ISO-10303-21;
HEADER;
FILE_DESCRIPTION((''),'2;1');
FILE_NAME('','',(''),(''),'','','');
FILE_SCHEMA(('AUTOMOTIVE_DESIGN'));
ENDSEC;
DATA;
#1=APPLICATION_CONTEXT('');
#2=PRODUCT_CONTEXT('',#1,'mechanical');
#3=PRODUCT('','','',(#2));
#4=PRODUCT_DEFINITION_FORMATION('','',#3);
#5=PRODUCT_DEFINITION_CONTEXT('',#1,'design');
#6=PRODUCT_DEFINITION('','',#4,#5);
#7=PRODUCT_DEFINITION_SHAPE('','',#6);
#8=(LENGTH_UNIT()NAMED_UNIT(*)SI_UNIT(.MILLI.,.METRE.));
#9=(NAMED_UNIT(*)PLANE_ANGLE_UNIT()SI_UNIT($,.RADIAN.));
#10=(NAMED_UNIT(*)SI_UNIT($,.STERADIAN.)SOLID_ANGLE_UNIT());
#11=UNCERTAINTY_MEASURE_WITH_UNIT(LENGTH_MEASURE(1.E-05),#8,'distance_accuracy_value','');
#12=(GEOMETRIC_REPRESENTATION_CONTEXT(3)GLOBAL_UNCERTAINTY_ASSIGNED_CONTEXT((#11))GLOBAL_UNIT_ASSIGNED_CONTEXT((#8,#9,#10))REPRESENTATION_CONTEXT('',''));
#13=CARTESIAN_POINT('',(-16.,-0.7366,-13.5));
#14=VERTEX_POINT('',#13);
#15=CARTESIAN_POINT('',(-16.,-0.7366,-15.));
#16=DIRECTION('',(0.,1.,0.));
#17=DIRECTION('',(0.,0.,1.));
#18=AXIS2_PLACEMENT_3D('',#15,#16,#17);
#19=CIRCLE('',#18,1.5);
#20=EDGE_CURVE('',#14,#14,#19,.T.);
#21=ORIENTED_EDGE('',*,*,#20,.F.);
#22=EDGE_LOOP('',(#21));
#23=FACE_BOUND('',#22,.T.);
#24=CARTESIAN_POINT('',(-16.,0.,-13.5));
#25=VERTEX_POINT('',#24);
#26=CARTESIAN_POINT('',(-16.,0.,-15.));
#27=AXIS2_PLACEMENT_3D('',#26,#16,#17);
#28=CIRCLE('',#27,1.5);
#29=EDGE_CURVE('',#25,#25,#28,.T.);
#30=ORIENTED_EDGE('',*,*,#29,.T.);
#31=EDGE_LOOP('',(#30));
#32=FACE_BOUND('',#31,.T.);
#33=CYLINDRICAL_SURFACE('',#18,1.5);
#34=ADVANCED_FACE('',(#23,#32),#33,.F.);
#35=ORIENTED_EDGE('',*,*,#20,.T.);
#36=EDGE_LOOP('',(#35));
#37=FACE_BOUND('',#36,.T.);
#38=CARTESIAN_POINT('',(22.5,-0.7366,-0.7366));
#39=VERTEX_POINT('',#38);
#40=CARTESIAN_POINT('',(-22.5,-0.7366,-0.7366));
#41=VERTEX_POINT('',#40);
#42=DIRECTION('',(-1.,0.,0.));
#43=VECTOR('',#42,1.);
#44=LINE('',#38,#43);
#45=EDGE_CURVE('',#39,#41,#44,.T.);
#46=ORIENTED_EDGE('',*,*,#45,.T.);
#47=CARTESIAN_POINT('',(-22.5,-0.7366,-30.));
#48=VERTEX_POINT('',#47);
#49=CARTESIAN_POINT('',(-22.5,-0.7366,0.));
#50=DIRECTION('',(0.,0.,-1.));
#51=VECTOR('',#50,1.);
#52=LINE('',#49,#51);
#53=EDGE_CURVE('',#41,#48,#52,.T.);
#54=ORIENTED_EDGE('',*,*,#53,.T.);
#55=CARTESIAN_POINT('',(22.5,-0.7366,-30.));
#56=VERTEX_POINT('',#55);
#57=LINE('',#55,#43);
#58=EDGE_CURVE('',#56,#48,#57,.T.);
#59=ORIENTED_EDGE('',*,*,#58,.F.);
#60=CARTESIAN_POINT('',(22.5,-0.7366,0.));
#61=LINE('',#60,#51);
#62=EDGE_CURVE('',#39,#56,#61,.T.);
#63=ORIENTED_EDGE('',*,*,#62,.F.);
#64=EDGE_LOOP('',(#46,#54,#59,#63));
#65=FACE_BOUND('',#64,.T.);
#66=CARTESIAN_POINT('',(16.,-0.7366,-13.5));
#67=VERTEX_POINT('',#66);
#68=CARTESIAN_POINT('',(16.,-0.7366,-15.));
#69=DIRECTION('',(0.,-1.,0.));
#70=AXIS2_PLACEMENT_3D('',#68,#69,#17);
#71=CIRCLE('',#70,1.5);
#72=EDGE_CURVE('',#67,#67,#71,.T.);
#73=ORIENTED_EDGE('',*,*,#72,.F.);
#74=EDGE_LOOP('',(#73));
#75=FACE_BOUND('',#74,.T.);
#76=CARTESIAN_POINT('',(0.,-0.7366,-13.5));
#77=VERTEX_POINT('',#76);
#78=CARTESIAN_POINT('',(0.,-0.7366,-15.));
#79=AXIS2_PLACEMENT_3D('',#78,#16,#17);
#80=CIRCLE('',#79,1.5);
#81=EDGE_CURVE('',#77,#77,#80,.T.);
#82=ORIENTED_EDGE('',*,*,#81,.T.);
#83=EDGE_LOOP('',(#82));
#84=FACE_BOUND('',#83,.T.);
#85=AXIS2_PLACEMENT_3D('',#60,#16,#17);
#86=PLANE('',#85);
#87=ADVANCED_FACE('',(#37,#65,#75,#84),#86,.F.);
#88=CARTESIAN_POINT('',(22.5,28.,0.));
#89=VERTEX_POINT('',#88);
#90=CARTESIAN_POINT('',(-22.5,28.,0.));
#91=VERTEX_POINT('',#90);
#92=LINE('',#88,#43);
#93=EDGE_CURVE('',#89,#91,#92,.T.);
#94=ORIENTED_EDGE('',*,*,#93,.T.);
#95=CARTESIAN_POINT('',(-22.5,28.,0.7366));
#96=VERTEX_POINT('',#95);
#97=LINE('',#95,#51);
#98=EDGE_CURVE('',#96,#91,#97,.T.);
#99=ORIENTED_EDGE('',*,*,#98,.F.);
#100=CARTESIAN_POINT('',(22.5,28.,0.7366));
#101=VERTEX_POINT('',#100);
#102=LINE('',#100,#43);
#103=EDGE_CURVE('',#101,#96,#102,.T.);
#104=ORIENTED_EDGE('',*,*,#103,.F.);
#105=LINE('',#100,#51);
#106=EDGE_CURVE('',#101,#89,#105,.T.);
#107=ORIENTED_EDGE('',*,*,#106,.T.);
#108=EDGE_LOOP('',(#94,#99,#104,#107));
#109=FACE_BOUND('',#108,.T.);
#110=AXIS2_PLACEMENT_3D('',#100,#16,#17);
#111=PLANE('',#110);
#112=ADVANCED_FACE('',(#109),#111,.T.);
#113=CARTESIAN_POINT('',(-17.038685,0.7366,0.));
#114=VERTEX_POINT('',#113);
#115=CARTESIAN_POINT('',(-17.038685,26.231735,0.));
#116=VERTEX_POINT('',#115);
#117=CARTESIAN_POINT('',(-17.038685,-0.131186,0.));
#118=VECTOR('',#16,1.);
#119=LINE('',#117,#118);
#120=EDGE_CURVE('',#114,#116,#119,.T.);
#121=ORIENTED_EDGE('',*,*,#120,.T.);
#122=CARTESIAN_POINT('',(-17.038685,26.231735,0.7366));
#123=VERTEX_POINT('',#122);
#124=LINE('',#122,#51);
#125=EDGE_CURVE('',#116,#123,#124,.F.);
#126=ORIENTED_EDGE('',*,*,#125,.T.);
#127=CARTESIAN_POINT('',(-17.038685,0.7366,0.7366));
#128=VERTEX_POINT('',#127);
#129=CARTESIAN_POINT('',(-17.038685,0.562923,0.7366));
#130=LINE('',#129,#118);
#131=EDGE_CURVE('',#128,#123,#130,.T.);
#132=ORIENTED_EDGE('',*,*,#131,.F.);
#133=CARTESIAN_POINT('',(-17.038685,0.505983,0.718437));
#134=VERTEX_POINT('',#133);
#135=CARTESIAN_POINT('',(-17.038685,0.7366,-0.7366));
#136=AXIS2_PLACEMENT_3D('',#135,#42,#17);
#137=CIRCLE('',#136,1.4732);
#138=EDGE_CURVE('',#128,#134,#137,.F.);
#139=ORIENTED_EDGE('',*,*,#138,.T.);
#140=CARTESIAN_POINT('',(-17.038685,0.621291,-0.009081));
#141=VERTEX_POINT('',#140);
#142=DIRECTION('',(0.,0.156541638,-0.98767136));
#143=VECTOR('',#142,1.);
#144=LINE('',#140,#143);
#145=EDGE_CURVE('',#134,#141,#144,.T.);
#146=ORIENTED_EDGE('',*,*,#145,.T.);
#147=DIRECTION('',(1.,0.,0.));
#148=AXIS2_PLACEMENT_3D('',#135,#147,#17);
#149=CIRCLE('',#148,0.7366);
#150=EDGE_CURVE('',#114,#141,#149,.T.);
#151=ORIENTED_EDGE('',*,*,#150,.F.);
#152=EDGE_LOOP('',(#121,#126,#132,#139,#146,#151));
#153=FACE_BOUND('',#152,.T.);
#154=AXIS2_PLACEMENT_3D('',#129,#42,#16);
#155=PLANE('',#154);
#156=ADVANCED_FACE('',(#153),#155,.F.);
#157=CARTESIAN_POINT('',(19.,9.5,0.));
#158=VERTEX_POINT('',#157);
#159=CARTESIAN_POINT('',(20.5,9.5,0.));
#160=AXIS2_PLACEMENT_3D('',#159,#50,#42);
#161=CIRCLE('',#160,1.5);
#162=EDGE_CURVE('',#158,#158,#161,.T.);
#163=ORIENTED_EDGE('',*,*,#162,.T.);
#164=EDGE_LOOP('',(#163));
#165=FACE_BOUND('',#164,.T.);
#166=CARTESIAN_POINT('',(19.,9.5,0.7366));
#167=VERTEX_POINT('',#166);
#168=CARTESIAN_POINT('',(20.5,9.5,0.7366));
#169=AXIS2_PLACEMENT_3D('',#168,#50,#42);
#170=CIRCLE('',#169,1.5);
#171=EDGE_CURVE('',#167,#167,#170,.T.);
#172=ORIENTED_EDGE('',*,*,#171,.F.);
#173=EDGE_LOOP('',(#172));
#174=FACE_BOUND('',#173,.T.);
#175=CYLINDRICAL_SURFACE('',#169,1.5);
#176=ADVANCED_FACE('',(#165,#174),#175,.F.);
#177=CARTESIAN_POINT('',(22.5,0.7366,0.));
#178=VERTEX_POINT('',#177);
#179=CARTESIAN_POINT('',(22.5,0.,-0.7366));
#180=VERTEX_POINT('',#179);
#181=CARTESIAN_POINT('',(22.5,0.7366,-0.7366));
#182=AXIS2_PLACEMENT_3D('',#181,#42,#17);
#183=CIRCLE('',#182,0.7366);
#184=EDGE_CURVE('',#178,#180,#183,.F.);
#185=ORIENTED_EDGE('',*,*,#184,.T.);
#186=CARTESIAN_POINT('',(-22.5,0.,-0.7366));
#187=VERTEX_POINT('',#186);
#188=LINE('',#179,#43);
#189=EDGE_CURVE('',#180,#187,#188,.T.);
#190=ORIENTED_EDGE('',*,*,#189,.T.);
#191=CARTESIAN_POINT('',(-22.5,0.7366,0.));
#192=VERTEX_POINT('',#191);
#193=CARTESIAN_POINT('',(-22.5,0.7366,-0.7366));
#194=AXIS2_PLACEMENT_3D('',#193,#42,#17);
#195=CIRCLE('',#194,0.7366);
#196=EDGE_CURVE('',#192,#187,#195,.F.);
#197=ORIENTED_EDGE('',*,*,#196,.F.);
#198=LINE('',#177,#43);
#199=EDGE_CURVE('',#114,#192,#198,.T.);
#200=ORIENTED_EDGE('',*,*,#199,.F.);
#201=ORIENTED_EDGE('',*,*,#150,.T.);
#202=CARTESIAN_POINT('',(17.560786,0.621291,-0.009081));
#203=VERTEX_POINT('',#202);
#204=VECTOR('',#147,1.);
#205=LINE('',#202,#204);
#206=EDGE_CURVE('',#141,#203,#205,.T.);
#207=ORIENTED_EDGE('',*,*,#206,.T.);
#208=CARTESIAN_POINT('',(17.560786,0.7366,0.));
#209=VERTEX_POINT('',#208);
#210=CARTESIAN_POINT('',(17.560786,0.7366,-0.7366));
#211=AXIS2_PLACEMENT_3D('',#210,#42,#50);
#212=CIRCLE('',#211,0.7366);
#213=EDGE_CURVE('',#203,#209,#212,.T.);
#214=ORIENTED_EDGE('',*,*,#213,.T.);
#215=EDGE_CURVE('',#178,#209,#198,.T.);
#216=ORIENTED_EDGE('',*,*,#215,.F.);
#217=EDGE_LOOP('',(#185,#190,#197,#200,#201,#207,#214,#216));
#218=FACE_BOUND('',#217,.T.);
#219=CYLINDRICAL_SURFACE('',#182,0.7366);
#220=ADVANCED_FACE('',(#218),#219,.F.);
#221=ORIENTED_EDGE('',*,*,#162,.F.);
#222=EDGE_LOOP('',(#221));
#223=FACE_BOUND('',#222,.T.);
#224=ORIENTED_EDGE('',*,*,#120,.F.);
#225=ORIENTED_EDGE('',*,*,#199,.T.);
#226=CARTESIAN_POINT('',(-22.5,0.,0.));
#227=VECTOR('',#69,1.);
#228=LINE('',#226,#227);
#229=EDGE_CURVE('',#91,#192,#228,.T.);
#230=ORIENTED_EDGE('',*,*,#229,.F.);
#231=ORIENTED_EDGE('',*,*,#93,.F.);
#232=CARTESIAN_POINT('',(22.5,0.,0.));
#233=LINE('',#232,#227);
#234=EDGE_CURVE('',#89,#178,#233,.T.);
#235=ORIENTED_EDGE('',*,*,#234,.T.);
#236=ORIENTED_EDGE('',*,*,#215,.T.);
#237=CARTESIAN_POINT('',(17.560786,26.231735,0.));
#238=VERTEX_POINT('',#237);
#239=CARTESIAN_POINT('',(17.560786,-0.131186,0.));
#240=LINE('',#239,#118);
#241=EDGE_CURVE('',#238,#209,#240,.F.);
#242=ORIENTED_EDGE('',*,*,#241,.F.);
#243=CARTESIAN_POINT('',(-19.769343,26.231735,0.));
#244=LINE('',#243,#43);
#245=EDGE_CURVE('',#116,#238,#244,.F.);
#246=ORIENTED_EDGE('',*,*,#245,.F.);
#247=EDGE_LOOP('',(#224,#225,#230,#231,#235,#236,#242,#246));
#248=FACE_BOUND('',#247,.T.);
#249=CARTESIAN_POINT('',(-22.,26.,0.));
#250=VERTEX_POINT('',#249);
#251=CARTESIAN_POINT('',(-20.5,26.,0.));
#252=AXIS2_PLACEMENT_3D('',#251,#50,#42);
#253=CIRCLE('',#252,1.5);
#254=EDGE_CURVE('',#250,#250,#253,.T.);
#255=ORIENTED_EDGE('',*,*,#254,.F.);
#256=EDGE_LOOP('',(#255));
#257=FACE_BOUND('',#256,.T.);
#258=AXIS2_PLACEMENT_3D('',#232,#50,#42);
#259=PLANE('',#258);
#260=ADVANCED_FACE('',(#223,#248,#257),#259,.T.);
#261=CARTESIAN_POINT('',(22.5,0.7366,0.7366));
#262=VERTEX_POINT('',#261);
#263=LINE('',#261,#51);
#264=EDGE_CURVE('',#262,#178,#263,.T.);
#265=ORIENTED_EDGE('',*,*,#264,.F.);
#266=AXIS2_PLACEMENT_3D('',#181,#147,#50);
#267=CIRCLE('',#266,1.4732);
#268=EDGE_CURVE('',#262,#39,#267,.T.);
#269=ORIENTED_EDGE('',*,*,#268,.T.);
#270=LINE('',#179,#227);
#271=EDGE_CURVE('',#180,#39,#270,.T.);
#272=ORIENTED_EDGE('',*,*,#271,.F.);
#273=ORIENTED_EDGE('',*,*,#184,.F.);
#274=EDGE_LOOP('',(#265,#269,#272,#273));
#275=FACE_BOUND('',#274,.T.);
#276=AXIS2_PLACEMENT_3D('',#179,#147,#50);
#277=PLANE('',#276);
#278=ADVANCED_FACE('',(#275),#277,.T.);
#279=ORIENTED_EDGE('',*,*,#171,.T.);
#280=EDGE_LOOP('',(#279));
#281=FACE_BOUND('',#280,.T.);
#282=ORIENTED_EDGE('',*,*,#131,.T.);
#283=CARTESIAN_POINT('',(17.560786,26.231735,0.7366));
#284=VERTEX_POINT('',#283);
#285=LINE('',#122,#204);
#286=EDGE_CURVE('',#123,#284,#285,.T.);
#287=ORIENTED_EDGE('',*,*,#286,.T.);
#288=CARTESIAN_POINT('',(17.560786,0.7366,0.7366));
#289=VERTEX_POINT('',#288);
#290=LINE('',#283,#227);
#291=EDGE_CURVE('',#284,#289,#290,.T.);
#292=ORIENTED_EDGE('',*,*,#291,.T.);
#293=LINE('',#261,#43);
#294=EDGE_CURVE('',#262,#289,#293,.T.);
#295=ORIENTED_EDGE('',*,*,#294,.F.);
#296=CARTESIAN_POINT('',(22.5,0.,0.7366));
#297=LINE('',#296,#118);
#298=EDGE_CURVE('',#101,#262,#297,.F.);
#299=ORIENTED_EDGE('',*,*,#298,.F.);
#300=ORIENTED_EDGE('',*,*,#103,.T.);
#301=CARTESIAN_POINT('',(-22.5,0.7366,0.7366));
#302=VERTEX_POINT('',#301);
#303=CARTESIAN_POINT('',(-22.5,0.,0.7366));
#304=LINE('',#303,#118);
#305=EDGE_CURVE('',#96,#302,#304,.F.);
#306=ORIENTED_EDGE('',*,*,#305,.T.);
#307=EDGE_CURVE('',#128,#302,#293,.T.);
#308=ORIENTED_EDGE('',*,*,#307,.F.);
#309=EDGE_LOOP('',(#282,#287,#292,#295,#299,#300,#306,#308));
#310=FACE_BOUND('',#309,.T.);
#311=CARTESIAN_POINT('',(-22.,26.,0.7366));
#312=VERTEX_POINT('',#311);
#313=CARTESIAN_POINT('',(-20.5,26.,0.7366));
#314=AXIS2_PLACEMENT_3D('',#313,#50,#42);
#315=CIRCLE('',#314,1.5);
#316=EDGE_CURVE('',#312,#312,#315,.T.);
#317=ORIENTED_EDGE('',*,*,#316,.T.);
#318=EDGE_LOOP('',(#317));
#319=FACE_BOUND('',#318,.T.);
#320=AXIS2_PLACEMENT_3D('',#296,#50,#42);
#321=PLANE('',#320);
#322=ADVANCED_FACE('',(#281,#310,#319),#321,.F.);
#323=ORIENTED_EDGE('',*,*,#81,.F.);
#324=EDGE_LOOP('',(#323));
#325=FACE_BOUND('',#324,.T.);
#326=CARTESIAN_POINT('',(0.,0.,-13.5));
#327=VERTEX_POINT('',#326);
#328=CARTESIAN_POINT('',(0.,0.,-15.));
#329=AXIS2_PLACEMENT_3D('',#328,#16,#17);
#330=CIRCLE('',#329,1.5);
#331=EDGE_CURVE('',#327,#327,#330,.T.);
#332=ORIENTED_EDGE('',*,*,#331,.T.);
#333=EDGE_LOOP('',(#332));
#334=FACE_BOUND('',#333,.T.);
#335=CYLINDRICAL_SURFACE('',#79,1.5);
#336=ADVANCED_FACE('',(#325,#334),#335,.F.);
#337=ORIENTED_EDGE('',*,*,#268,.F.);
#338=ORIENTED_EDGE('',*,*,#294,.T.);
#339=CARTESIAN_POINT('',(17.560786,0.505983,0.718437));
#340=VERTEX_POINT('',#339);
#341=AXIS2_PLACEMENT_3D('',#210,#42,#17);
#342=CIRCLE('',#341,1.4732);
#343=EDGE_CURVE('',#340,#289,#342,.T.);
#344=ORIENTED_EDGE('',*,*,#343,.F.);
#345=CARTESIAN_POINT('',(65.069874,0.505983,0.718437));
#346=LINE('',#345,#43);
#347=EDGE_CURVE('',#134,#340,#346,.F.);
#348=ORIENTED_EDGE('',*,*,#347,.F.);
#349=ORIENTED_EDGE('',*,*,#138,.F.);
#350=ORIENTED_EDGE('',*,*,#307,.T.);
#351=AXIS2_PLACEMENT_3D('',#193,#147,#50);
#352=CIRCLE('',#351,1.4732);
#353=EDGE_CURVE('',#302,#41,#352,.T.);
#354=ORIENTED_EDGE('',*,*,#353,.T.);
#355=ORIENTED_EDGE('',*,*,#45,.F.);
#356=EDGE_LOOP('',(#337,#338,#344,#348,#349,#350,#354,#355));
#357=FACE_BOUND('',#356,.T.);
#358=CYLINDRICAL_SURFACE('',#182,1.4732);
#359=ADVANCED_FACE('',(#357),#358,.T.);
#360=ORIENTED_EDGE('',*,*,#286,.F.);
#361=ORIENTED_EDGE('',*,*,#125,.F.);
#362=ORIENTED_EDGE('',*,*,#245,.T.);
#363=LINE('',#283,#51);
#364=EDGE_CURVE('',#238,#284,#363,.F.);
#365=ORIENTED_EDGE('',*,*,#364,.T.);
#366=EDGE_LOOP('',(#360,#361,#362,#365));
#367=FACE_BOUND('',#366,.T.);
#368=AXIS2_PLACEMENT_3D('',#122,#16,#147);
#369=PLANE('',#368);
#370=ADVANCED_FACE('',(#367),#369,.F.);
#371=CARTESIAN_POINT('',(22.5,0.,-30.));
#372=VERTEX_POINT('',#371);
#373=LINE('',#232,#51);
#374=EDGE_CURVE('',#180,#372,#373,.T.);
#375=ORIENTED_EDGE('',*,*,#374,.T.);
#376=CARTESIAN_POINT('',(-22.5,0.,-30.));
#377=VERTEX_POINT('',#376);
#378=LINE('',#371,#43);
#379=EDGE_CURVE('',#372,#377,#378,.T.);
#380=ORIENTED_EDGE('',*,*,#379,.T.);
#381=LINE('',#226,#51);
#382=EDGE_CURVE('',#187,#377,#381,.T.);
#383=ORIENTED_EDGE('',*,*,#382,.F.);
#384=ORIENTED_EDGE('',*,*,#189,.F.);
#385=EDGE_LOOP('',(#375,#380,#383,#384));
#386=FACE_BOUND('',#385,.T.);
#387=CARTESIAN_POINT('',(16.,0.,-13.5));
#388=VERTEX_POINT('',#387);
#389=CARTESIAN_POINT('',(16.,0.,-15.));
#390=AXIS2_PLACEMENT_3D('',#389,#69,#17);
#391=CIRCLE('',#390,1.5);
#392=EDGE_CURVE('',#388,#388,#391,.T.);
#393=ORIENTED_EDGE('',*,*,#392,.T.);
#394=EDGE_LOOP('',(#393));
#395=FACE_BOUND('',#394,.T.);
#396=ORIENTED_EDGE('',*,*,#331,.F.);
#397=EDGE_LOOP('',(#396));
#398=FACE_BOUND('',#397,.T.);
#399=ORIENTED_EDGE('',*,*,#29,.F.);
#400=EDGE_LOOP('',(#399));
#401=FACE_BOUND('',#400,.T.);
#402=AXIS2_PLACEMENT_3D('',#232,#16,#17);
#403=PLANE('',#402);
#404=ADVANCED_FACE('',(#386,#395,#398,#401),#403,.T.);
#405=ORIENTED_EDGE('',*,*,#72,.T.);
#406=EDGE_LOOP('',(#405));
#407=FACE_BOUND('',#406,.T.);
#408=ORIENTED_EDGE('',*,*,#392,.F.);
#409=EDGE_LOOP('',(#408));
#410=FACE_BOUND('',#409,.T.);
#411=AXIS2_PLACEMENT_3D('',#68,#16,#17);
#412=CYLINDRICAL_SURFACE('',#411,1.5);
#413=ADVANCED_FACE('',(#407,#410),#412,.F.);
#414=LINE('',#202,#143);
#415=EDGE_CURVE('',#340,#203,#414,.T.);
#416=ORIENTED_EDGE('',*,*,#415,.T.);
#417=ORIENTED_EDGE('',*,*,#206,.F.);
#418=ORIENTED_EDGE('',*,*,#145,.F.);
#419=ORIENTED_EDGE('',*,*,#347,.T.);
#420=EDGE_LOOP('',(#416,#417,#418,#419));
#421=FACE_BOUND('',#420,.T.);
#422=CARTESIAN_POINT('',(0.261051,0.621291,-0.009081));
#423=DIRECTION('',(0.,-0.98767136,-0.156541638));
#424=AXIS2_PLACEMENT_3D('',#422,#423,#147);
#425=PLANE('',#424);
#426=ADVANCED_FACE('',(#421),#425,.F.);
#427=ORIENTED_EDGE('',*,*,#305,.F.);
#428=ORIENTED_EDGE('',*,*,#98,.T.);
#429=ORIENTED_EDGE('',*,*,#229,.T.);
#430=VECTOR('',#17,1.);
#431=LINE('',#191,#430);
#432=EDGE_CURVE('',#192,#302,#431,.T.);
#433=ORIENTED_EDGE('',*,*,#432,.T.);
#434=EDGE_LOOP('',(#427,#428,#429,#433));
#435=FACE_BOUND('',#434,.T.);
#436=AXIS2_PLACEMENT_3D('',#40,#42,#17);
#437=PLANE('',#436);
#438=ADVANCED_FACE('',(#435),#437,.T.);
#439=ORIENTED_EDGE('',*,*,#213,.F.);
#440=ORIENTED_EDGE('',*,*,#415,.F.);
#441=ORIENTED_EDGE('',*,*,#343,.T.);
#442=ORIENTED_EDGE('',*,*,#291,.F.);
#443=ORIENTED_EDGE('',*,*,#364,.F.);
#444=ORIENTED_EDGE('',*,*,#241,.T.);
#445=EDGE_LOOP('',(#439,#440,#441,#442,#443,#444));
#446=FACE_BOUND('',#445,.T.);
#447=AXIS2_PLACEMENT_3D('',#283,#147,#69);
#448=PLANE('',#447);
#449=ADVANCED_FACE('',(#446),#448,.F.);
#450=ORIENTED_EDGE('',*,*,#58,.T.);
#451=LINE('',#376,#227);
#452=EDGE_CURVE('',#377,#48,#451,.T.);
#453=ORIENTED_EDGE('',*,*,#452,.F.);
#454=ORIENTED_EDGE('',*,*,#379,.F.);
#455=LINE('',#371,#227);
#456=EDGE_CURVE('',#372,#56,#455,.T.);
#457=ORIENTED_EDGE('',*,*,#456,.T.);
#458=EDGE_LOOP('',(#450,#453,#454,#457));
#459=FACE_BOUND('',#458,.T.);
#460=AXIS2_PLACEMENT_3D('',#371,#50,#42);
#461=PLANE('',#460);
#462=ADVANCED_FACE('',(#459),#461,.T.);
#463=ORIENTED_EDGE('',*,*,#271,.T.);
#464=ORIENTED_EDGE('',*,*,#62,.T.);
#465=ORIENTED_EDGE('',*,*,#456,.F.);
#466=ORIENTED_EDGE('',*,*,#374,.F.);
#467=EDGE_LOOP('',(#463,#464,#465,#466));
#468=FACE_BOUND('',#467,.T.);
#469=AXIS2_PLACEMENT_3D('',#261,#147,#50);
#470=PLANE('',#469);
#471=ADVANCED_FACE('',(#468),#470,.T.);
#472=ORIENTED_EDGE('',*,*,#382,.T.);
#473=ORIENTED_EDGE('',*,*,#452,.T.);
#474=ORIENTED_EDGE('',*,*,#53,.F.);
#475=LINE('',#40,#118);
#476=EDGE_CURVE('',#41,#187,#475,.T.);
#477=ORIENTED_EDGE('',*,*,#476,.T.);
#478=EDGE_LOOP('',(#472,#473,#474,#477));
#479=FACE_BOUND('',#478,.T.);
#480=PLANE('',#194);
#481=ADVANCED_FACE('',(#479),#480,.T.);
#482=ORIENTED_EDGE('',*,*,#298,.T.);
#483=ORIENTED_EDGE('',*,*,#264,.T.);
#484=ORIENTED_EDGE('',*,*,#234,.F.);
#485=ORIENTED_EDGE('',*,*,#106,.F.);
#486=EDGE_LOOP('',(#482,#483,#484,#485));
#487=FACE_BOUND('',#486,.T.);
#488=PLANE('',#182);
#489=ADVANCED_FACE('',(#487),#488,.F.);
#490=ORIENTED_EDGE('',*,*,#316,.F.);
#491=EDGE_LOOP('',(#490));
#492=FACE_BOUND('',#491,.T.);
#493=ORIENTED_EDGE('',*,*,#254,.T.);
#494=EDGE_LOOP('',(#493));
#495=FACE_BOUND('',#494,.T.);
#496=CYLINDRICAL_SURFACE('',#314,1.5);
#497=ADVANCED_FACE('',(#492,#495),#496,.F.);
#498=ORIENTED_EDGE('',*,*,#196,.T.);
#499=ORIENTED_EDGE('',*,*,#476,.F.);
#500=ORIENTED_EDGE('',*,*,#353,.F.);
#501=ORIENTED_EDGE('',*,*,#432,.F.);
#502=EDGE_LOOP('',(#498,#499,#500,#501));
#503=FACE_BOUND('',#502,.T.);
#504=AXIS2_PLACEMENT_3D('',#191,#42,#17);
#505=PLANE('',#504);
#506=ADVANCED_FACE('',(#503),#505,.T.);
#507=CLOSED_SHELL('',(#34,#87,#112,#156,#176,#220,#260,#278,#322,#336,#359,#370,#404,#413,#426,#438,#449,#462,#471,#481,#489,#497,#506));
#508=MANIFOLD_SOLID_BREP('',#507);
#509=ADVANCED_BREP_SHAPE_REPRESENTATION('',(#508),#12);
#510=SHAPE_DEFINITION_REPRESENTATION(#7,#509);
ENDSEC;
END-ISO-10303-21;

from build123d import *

# Parameters (mm, degrees)
BASE_FLANGE1_DEPTH = 22.5
SKETCH6_R          = 1.5
CUT_EXTRUDE2_DEPTH = 47.800106837
SKETCH8_R          = 1.5
CUT_EXTRUDE3_DEPTH = 47.800106837
CUT_EXTRUDE5_START = -17.038685437
CUT_EXTRUDE5_DEPTH = 34.599471918


# Read off the part's stored shape, not the designer's step: Cut-Extrude5
# Sheet-metal steps are written as plain solids
with BuildPart() as part:
    # Sketch2 → Base-Flange1 (new, symmetric)
    with BuildSketch(Plane(origin=(0, 0, 0), x_dir=(0, 0, -1), z_dir=(1, 0, 0))):
        with BuildLine():
            Line((30, 0), (0.7366, 0))
            ThreePointArc((0.7366, 0), (0.215745145, 0.215745145), (0, 0.7366))
            Line((0, 0.7366), (0, 28))
            Line((0, 28), (-0.7366, 28))
            Line((-0.7366, 28), (-0.7366, 0.7366))
            ThreePointArc((-0.7366, 0.7366), (-0.30510971, -0.30510971), (0.7366, -0.7366))
            Line((0.7366, -0.7366), (30, -0.7366))
            Line((30, -0.7366), (30, 0))
        make_face()
    extrude(amount=BASE_FLANGE1_DEPTH, both=True)

    # Sketch6 → Cut-Extrude2 (cut, through all)
    with BuildSketch(Plane(origin=(0, 0, 0), x_dir=(-1, 0, 0), z_dir=(0, 0, -1))):
        with Locations((-20.5, 9.5)):
            Circle(SKETCH6_R)
        with Locations((20.5, 26)):
            Circle(SKETCH6_R)
    extrude(amount=-CUT_EXTRUDE2_DEPTH, mode=Mode.SUBTRACT)

    # Sketch8 → Cut-Extrude3 (cut, through all)
    with BuildSketch(Plane(origin=(0, 0, 0), x_dir=(1, 0, 0), z_dir=(0, 1, 0))):
        with Locations(Location((0, 15, 0), (0, 0, 270))):
            Circle(SKETCH8_R)
        with Locations(Location((-16, 15, 0), (0, 0, 270))):
            Circle(SKETCH8_R)
    cut_extrude3 = extrude(amount=-CUT_EXTRUDE3_DEPTH, mode=Mode.SUBTRACT)

    # Mirror1: Cut-Extrude3 across plane
    add(cut_extrude3.mirror(Plane(origin=(0, 0, 0), x_dir=(0, 0, 1), z_dir=(1, 0, 0))), mode=Mode.SUBTRACT)

    # Cut-Extrude5 outline → Cut-Extrude5 (cut)
    with BuildSketch(Plane.YZ.offset(CUT_EXTRUDE5_START)):
        with BuildLine():
            ThreePointArc((0.7366, 0.7366), (0.620934378, 0.732052343), (0.505982859, 0.718437448))
            Line((0.505982859, 0.718437448), (0.62129143, -0.009081276))
            ThreePointArc((0.62129143, -0.009081276), (0.678767189, -0.002273829), (0.7366, 0))
            Line((0.7366, 0), (26.231735093, 0))
            Line((26.231735093, 0), (26.231735093, 0.7366))
            Line((26.231735093, 0.7366), (0.7366, 0.7366))
        make_face()
    extrude(amount=CUT_EXTRUDE5_DEPTH, mode=Mode.SUBTRACT)


solid = part.part
